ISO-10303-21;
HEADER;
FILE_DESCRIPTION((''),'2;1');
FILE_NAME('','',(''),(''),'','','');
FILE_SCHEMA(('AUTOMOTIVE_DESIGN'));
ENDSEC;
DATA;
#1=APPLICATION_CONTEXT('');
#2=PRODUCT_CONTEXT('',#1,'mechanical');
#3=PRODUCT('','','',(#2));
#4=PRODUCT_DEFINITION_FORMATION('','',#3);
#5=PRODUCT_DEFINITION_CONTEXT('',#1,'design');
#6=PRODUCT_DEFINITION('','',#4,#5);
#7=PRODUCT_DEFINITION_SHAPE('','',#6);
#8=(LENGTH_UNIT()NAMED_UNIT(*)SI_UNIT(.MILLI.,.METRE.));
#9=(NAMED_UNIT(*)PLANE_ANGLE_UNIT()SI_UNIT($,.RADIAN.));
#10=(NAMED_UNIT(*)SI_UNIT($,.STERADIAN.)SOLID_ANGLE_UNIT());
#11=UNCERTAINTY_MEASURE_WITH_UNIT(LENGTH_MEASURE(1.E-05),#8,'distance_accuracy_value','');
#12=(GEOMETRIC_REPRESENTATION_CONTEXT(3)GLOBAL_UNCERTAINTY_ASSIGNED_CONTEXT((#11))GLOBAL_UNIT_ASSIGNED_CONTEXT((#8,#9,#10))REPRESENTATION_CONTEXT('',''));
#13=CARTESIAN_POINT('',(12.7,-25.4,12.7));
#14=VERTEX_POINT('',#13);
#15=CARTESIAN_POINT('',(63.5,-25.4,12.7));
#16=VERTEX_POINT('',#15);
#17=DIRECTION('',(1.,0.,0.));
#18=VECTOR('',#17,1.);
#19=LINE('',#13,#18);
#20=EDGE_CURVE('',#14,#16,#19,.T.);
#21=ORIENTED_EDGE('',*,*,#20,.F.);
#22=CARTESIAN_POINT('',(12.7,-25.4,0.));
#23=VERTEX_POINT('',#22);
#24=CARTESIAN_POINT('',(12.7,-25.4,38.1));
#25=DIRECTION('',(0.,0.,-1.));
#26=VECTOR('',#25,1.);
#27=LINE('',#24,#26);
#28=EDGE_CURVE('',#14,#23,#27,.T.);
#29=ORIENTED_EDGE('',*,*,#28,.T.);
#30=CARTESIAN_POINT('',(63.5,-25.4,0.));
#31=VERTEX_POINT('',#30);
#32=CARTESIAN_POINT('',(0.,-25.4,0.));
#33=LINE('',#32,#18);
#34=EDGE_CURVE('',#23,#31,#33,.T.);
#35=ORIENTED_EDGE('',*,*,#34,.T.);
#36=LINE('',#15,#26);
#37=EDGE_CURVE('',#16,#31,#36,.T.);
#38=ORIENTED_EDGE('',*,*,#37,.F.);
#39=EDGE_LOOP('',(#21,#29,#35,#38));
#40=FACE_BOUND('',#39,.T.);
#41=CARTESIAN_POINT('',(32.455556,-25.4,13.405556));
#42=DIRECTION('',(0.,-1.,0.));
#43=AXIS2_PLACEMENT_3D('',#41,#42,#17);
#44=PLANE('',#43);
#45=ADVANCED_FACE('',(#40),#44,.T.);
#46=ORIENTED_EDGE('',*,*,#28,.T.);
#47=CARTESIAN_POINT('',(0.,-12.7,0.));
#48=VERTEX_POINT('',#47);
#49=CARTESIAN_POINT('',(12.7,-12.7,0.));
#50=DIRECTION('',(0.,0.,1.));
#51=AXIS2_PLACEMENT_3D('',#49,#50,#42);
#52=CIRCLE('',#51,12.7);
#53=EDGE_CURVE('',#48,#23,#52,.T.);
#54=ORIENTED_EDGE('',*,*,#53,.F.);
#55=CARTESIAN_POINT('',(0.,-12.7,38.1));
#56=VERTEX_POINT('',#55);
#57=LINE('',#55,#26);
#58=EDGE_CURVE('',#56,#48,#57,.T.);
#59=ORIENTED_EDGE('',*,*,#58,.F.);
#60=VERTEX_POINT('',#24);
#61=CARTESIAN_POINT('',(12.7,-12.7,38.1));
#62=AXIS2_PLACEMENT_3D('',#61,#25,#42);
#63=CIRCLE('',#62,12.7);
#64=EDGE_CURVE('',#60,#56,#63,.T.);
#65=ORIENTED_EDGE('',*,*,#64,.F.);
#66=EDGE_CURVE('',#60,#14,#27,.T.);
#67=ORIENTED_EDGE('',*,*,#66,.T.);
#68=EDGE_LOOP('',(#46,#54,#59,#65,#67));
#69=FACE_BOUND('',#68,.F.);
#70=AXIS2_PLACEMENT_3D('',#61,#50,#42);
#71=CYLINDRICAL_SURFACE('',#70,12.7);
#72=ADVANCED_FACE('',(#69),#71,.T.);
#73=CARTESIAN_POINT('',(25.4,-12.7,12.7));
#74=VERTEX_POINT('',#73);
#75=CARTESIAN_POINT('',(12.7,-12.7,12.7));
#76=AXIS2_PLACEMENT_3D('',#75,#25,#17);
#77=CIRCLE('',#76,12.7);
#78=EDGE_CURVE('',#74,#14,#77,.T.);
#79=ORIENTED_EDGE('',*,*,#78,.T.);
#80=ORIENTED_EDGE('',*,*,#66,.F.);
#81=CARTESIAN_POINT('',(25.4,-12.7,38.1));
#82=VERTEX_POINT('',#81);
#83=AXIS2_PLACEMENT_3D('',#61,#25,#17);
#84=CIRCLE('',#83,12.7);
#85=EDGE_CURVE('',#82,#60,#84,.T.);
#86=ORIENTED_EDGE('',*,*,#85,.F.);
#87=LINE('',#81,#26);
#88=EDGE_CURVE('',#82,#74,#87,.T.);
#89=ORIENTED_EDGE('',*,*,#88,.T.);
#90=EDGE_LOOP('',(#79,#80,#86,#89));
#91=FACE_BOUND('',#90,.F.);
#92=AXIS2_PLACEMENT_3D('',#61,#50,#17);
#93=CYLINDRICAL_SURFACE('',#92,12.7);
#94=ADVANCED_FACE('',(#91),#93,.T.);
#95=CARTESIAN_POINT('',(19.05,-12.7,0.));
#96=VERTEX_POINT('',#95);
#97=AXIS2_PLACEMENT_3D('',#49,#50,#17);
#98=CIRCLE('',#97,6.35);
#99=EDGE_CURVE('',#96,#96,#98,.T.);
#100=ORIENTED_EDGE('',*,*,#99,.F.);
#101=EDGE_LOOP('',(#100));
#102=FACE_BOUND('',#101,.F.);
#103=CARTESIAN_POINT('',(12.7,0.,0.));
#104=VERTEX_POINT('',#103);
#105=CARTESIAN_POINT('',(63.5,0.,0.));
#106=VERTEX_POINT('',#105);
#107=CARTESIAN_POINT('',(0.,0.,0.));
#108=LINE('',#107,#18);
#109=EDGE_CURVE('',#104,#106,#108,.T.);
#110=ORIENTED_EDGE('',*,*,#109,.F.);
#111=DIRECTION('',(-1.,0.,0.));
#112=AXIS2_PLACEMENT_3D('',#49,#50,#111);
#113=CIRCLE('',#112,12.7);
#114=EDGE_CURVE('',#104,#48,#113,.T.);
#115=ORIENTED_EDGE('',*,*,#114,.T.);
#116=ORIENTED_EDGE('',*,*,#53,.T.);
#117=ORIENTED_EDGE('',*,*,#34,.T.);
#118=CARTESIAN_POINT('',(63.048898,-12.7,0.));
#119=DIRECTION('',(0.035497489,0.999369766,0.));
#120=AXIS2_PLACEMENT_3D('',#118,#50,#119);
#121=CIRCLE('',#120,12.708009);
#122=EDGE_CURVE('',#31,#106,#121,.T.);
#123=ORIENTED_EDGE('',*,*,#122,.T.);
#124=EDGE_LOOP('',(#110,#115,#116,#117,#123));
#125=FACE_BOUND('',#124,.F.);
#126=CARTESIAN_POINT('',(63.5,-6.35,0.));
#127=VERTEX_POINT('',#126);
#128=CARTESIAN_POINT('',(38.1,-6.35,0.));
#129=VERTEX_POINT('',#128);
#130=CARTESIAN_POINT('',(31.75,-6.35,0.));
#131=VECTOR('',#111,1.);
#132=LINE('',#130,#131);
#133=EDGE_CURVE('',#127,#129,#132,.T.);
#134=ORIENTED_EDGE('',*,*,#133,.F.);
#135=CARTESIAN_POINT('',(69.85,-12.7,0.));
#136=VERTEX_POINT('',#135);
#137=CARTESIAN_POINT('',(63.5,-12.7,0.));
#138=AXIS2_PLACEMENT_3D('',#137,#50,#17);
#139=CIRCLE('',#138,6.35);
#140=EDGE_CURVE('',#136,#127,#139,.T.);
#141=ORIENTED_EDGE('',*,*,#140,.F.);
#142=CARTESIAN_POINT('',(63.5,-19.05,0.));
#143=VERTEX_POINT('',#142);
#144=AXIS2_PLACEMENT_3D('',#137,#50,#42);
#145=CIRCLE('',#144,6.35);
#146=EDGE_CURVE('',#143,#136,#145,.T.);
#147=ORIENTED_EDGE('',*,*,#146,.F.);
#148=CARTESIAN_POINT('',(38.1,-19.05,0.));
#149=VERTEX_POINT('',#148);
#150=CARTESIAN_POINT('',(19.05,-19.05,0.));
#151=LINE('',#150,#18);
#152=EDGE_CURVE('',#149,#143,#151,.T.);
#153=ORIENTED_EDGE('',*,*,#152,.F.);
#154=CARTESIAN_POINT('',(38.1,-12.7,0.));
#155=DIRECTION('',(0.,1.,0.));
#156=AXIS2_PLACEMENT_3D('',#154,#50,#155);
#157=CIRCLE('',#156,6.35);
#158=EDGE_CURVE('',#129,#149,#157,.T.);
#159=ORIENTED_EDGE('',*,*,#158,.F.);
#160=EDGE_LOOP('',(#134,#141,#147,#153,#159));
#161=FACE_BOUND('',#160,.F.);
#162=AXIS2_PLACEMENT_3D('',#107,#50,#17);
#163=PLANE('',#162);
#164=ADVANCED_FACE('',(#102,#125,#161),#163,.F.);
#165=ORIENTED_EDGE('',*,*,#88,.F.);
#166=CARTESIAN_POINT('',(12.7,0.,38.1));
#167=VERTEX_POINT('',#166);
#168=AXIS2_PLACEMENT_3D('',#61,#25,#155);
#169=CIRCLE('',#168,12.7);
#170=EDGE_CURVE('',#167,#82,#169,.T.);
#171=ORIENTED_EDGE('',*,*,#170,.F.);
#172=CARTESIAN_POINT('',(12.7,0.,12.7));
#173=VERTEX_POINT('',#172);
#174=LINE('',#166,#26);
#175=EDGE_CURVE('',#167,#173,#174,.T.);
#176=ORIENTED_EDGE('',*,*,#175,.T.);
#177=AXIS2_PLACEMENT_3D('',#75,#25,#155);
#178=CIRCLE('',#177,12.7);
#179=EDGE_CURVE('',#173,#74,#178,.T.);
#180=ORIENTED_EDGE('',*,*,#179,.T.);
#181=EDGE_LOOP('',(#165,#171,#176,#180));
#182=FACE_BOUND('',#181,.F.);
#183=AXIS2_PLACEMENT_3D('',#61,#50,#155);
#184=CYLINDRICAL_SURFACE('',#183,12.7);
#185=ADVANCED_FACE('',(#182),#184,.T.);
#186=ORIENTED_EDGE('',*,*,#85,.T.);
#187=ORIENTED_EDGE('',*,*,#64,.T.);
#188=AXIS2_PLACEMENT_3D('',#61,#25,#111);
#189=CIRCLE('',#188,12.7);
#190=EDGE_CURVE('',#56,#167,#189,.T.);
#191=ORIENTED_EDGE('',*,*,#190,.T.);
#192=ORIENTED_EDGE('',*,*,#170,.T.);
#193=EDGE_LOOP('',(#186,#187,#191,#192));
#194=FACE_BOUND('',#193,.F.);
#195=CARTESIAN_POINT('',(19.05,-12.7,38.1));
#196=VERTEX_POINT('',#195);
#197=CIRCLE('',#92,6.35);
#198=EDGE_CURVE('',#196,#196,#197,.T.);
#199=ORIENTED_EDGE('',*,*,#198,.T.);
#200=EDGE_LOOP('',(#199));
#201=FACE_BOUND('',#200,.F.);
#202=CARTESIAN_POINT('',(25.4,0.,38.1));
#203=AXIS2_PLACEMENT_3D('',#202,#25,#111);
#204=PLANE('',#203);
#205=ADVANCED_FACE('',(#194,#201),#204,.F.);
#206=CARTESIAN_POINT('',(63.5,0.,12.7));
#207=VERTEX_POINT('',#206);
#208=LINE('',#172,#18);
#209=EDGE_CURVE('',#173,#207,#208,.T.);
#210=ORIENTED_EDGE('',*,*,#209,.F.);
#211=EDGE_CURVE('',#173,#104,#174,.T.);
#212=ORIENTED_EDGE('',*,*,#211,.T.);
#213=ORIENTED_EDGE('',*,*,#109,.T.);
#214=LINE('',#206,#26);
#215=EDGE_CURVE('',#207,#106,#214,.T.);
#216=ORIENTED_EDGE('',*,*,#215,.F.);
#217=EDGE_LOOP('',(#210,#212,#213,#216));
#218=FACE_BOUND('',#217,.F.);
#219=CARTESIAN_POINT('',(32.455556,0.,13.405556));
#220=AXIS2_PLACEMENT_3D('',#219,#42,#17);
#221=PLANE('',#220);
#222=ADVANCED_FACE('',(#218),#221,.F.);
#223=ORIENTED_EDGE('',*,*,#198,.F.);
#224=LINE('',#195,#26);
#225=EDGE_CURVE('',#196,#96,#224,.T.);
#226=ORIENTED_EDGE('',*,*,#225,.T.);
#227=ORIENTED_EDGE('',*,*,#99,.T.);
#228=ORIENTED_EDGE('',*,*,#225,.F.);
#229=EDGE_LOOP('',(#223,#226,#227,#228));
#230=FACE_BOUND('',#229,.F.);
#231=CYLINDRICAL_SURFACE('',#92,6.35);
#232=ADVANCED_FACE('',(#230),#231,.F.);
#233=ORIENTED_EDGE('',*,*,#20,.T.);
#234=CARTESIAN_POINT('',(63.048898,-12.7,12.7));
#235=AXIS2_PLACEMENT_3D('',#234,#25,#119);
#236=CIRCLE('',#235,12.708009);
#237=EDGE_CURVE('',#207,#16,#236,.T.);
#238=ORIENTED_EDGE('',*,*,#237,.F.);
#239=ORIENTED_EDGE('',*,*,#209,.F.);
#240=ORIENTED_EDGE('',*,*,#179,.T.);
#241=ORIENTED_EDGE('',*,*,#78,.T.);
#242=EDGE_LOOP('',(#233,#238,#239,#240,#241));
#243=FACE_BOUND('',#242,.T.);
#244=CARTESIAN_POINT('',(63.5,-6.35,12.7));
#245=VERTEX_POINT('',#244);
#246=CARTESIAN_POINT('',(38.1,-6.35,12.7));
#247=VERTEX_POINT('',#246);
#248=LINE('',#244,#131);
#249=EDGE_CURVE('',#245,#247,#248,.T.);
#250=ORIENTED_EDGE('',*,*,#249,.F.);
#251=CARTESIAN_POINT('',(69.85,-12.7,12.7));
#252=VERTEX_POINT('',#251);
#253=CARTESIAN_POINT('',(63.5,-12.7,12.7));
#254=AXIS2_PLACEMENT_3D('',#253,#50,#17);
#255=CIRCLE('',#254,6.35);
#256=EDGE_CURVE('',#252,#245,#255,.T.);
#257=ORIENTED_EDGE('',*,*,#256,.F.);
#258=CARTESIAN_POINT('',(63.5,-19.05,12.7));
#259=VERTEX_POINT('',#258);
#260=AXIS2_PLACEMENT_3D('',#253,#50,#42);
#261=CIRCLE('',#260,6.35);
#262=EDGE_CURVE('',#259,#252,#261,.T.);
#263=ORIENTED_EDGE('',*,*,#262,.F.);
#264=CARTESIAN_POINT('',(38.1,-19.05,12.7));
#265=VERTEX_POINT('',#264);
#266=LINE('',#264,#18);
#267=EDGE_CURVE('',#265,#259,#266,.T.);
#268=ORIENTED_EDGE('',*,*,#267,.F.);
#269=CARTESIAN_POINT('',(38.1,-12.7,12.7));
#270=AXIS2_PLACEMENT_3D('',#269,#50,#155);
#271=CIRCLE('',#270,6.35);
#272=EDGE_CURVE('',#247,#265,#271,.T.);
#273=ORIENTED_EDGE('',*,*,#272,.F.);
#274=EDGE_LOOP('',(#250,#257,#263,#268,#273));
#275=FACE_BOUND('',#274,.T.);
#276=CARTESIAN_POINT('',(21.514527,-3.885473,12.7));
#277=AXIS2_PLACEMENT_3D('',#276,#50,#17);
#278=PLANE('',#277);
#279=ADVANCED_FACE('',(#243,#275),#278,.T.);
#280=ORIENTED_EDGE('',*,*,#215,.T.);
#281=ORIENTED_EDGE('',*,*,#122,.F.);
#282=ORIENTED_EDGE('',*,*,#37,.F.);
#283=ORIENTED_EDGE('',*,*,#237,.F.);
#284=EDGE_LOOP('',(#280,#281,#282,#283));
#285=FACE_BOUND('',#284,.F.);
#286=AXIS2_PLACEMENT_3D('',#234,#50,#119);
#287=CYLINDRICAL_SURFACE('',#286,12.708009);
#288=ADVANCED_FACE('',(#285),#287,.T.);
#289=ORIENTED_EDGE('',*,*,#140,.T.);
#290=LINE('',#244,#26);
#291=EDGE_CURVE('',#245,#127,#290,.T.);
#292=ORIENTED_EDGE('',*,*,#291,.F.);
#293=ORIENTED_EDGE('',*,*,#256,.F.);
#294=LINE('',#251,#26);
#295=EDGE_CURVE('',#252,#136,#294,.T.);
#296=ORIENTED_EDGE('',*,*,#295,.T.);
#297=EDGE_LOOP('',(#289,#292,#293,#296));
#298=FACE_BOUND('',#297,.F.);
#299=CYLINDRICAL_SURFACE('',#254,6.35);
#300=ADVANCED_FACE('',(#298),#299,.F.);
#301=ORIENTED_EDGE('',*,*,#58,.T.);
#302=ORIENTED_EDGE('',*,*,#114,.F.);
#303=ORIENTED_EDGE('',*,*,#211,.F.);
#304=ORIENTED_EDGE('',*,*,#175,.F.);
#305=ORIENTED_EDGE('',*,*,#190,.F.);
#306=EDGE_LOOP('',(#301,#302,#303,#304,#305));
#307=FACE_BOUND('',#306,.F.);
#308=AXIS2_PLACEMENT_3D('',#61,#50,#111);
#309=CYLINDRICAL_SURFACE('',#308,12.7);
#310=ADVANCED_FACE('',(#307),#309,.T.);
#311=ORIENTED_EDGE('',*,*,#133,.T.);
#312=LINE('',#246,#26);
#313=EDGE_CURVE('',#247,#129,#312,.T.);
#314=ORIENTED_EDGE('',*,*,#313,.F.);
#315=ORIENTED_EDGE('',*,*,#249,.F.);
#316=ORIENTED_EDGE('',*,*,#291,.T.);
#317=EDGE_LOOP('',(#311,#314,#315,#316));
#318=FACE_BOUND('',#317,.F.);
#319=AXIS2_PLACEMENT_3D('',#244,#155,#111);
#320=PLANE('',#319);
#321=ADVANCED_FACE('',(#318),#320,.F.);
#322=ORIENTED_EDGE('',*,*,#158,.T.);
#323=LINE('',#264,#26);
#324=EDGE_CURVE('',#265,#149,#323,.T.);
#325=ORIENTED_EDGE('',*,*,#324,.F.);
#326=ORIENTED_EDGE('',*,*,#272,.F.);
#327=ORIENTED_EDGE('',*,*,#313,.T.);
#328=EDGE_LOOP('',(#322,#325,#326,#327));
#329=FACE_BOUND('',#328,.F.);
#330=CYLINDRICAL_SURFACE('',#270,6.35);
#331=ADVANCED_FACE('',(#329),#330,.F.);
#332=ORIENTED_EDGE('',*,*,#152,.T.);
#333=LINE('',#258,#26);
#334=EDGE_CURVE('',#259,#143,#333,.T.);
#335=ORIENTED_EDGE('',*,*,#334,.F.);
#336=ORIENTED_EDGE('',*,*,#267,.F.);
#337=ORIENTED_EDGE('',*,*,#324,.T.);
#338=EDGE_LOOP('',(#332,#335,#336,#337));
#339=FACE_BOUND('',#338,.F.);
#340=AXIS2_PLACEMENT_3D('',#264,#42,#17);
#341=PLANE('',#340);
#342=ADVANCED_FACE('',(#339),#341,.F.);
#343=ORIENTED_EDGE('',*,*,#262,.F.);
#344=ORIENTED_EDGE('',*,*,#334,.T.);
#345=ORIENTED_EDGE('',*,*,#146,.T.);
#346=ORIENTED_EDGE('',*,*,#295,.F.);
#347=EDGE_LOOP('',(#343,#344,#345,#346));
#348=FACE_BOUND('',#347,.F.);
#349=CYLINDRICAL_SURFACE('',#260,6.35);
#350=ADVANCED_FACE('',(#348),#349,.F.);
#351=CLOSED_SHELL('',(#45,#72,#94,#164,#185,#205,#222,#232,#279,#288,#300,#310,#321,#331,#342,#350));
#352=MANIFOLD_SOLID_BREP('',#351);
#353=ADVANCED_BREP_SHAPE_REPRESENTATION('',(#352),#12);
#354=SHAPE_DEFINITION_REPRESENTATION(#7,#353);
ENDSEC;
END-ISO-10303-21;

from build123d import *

# Parameters (mm, degrees)
F1_DEPTH = 25.4
F3_DEPTH = 12.701
F5_DEPTH = 38.101
F7_DEPTH = 25.4


with BuildPart() as f1:
    # F0 (on Front) → F1 (new body)
    with BuildSketch(Plane.XZ):
        Polygon((0, 38.1), (0, 0), (76.2, 0), (76.2, 12.7), (25.4, 12.7), (25.4, 38.1), align=None)
    extrude(amount=F1_DEPTH)

    # F2 (on face) → F3 (cut, through all)
    with BuildSketch(Plane.XY.offset(12.7)):
        with BuildLine():
            Line((76.2, 0), (63.5, 0))
            ThreePointArc((63.5, 0), (75.756906611, -12.7), (63.5, -25.4))
            Line((63.5, -25.4), (76.2, -25.4))
            Line((76.2, -25.4), (76.2, 0))
        make_face()
        with BuildLine():
            ThreePointArc((69.85, -12.7), (67.9901280605, -8.2098719395), (63.5, -6.35))
            Line((63.5, -6.35), (63.5, -19.05))
            ThreePointArc((63.5, -19.05), (67.9901280605, -17.1901280605), (69.85, -12.7))
        make_face()
        with BuildLine():
            Line((63.5, -19.05), (63.5, -6.35))
            ThreePointArc((63.5, -6.35), (57.15, -12.7), (63.5, -19.05))
        make_face()
        with BuildLine():
            ThreePointArc((63.5, -19.05), (57.15, -12.7), (63.5, -6.35))
            Line((63.5, -6.35), (38.1, -6.35))
            ThreePointArc((38.1, -6.35), (42.5901280605, -8.2098719395), (44.45, -12.7))
            ThreePointArc((44.45, -12.7), (42.5901280605, -17.1901280605), (38.1, -19.05))
            Line((38.1, -19.05), (63.5, -19.05))
        make_face()
        with BuildLine():
            Line((38.1, -19.05), (38.1, -6.35))
            ThreePointArc((38.1, -6.35), (31.75, -12.7), (38.1, -19.05))
        make_face()
        with BuildLine():
            ThreePointArc((44.45, -12.7), (42.5901280605, -8.2098719395), (38.1, -6.35))
            Line((38.1, -6.35), (38.1, -19.05))
            ThreePointArc((38.1, -19.05), (42.5901280605, -17.1901280605), (44.45, -12.7))
        make_face()
    extrude(amount=-F3_DEPTH, mode=Mode.SUBTRACT)

    # F4 (on face) → F5 (cut, through all)
    with BuildSketch(Plane.XY.offset(38.1)):
        with BuildLine():
            ThreePointArc((0, -12.7), (3.7197438789, -3.7197438789), (12.7, 0))
            Line((12.7, 0), (0, 0))
            Line((0, 0), (0, -12.7))
        make_face()
        with BuildLine():
            Line((0, -25.4), (12.7, -25.4))
            ThreePointArc((12.7, -25.4), (3.7197438789, -21.6802561211), (0, -12.7))
            Line((0, -12.7), (0, -25.4))
        make_face()
        with BuildLine():
            ThreePointArc((6.35, -12.7), (12.7, -19.05), (19.05, -12.7))
            Line((19.05, -12.7), (6.35, -12.7))
        make_face()
        with BuildLine():
            Line((6.35, -12.7), (19.05, -12.7))
            ThreePointArc((19.05, -12.7), (12.7, -6.35), (6.35, -12.7))
        make_face()
    extrude(amount=-F5_DEPTH, mode=Mode.SUBTRACT)

    # F6 (on face) → F7 (cut)
    with BuildSketch(Plane.XY.offset(38.1)):
        with BuildLine():
            Line((25.4, -25.4), (25.4, -12.7))
            ThreePointArc((25.4, -12.7), (21.6802561211, -21.6802561211), (12.7, -25.4))
            Line((12.7, -25.4), (25.4, -25.4))
        make_face()
        with BuildLine():
            ThreePointArc((12.7, 0), (21.6802561211, -3.7197438789), (25.4, -12.7))
            Line((25.4, -12.7), (25.4, 0))
            Line((25.4, 0), (12.7, 0))
        make_face()
    extrude(amount=-F7_DEPTH, mode=Mode.SUBTRACT)


solid = f1.part
